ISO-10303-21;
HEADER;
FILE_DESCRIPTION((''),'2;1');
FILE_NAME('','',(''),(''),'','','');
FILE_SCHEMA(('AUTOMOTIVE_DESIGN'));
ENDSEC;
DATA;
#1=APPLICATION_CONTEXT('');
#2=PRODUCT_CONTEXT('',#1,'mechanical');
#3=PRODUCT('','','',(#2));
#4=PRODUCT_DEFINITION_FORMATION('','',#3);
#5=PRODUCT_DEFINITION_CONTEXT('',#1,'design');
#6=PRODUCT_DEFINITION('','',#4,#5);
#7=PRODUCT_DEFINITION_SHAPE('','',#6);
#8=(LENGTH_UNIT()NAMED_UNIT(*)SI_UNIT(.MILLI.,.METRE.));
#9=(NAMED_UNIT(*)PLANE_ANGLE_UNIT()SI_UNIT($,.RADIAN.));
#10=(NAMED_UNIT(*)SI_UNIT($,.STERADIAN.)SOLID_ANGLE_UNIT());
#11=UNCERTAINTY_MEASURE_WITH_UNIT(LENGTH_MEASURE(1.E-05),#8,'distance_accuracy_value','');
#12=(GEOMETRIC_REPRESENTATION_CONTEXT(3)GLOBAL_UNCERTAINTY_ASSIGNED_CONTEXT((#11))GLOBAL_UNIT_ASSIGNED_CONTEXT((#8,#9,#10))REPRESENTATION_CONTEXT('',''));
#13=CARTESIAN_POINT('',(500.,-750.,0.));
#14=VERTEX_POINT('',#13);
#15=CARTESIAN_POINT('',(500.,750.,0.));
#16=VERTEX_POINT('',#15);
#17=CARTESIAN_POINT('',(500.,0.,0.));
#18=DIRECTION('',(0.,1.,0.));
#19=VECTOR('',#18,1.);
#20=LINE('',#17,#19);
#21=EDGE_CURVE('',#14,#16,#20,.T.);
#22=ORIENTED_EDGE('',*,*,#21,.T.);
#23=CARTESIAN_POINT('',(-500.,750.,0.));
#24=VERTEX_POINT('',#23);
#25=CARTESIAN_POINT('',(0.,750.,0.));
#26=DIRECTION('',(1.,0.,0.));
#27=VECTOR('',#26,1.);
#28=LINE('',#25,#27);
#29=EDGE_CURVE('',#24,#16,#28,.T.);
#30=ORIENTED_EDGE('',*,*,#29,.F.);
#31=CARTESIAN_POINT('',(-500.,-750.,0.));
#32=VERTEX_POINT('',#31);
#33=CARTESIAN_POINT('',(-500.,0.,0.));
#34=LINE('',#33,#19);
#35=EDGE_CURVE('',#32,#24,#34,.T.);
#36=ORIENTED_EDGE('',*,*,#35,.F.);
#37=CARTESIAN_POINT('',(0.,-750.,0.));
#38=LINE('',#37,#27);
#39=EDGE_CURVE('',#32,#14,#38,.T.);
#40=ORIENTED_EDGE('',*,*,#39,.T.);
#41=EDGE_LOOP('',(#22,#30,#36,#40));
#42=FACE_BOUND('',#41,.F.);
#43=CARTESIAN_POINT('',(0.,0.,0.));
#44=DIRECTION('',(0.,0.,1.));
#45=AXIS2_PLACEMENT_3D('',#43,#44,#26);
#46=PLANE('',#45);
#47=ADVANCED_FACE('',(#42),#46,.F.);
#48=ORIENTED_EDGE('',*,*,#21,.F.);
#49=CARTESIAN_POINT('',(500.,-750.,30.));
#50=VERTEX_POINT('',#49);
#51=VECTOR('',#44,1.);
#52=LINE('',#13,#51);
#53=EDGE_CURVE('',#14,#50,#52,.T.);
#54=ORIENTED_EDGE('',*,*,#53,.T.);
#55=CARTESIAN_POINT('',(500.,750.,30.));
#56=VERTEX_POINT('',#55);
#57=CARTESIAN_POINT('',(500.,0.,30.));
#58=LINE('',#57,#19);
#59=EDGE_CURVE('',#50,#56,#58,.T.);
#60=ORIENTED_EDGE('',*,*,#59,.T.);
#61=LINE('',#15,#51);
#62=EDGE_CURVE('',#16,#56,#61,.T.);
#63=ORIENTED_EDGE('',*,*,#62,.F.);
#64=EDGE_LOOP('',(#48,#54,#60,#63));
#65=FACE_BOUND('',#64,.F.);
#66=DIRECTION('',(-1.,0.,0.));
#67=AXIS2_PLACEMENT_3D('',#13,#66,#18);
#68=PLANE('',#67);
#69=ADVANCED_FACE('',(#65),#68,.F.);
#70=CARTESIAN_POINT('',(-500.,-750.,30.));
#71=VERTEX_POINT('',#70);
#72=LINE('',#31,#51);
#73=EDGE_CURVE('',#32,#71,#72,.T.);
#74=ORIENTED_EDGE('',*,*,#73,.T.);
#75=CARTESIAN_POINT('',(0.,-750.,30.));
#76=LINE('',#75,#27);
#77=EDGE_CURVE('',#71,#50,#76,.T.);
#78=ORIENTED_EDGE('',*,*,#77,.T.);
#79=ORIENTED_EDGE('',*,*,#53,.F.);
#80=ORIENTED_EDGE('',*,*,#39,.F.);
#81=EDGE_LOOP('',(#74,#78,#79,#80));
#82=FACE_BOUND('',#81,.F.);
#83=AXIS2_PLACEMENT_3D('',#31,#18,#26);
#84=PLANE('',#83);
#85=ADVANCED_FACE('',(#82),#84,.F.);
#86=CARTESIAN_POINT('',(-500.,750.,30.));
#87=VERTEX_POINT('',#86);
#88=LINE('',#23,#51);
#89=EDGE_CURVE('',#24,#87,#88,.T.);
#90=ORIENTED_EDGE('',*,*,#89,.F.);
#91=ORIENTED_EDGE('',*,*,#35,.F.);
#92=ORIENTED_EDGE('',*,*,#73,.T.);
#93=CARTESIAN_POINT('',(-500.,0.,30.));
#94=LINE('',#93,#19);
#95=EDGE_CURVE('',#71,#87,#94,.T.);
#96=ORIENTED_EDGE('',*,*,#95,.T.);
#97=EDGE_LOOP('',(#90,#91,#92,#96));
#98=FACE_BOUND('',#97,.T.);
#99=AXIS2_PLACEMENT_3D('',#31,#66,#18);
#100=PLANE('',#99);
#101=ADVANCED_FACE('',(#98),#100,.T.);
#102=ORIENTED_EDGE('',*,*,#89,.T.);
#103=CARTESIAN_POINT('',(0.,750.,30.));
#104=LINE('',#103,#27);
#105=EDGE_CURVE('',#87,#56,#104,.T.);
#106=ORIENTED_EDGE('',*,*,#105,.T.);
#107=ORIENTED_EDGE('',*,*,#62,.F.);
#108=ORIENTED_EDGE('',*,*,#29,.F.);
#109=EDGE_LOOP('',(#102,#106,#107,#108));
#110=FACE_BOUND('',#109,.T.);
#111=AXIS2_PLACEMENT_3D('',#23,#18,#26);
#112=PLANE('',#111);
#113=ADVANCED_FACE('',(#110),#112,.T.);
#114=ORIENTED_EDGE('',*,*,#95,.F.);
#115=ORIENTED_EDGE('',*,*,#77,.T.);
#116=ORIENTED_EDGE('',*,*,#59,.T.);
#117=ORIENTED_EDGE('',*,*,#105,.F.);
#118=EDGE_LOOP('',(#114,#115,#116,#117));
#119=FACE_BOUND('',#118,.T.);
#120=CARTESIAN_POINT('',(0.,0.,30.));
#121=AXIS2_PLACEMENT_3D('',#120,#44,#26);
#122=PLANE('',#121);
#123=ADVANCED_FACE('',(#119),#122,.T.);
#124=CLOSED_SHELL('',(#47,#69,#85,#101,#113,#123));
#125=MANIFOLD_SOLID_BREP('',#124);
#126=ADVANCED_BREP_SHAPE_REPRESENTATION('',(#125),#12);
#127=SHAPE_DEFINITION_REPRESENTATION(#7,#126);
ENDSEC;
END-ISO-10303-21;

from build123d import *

# Parameters (mm, degrees)
F0_W     = 1000
F0_H     = 1500
F1_DEPTH = 30


# Not quite as in the source:
# - a feature of the source that left no trace in its solid (it failed there, or was rolled back) is left out


with BuildPart() as f1:
    # F0 (on Top) → F1 (new body)
    with BuildSketch(Plane.XY):
        Rectangle(F0_W, F0_H)
    extrude(amount=F1_DEPTH)


solid = f1.part
